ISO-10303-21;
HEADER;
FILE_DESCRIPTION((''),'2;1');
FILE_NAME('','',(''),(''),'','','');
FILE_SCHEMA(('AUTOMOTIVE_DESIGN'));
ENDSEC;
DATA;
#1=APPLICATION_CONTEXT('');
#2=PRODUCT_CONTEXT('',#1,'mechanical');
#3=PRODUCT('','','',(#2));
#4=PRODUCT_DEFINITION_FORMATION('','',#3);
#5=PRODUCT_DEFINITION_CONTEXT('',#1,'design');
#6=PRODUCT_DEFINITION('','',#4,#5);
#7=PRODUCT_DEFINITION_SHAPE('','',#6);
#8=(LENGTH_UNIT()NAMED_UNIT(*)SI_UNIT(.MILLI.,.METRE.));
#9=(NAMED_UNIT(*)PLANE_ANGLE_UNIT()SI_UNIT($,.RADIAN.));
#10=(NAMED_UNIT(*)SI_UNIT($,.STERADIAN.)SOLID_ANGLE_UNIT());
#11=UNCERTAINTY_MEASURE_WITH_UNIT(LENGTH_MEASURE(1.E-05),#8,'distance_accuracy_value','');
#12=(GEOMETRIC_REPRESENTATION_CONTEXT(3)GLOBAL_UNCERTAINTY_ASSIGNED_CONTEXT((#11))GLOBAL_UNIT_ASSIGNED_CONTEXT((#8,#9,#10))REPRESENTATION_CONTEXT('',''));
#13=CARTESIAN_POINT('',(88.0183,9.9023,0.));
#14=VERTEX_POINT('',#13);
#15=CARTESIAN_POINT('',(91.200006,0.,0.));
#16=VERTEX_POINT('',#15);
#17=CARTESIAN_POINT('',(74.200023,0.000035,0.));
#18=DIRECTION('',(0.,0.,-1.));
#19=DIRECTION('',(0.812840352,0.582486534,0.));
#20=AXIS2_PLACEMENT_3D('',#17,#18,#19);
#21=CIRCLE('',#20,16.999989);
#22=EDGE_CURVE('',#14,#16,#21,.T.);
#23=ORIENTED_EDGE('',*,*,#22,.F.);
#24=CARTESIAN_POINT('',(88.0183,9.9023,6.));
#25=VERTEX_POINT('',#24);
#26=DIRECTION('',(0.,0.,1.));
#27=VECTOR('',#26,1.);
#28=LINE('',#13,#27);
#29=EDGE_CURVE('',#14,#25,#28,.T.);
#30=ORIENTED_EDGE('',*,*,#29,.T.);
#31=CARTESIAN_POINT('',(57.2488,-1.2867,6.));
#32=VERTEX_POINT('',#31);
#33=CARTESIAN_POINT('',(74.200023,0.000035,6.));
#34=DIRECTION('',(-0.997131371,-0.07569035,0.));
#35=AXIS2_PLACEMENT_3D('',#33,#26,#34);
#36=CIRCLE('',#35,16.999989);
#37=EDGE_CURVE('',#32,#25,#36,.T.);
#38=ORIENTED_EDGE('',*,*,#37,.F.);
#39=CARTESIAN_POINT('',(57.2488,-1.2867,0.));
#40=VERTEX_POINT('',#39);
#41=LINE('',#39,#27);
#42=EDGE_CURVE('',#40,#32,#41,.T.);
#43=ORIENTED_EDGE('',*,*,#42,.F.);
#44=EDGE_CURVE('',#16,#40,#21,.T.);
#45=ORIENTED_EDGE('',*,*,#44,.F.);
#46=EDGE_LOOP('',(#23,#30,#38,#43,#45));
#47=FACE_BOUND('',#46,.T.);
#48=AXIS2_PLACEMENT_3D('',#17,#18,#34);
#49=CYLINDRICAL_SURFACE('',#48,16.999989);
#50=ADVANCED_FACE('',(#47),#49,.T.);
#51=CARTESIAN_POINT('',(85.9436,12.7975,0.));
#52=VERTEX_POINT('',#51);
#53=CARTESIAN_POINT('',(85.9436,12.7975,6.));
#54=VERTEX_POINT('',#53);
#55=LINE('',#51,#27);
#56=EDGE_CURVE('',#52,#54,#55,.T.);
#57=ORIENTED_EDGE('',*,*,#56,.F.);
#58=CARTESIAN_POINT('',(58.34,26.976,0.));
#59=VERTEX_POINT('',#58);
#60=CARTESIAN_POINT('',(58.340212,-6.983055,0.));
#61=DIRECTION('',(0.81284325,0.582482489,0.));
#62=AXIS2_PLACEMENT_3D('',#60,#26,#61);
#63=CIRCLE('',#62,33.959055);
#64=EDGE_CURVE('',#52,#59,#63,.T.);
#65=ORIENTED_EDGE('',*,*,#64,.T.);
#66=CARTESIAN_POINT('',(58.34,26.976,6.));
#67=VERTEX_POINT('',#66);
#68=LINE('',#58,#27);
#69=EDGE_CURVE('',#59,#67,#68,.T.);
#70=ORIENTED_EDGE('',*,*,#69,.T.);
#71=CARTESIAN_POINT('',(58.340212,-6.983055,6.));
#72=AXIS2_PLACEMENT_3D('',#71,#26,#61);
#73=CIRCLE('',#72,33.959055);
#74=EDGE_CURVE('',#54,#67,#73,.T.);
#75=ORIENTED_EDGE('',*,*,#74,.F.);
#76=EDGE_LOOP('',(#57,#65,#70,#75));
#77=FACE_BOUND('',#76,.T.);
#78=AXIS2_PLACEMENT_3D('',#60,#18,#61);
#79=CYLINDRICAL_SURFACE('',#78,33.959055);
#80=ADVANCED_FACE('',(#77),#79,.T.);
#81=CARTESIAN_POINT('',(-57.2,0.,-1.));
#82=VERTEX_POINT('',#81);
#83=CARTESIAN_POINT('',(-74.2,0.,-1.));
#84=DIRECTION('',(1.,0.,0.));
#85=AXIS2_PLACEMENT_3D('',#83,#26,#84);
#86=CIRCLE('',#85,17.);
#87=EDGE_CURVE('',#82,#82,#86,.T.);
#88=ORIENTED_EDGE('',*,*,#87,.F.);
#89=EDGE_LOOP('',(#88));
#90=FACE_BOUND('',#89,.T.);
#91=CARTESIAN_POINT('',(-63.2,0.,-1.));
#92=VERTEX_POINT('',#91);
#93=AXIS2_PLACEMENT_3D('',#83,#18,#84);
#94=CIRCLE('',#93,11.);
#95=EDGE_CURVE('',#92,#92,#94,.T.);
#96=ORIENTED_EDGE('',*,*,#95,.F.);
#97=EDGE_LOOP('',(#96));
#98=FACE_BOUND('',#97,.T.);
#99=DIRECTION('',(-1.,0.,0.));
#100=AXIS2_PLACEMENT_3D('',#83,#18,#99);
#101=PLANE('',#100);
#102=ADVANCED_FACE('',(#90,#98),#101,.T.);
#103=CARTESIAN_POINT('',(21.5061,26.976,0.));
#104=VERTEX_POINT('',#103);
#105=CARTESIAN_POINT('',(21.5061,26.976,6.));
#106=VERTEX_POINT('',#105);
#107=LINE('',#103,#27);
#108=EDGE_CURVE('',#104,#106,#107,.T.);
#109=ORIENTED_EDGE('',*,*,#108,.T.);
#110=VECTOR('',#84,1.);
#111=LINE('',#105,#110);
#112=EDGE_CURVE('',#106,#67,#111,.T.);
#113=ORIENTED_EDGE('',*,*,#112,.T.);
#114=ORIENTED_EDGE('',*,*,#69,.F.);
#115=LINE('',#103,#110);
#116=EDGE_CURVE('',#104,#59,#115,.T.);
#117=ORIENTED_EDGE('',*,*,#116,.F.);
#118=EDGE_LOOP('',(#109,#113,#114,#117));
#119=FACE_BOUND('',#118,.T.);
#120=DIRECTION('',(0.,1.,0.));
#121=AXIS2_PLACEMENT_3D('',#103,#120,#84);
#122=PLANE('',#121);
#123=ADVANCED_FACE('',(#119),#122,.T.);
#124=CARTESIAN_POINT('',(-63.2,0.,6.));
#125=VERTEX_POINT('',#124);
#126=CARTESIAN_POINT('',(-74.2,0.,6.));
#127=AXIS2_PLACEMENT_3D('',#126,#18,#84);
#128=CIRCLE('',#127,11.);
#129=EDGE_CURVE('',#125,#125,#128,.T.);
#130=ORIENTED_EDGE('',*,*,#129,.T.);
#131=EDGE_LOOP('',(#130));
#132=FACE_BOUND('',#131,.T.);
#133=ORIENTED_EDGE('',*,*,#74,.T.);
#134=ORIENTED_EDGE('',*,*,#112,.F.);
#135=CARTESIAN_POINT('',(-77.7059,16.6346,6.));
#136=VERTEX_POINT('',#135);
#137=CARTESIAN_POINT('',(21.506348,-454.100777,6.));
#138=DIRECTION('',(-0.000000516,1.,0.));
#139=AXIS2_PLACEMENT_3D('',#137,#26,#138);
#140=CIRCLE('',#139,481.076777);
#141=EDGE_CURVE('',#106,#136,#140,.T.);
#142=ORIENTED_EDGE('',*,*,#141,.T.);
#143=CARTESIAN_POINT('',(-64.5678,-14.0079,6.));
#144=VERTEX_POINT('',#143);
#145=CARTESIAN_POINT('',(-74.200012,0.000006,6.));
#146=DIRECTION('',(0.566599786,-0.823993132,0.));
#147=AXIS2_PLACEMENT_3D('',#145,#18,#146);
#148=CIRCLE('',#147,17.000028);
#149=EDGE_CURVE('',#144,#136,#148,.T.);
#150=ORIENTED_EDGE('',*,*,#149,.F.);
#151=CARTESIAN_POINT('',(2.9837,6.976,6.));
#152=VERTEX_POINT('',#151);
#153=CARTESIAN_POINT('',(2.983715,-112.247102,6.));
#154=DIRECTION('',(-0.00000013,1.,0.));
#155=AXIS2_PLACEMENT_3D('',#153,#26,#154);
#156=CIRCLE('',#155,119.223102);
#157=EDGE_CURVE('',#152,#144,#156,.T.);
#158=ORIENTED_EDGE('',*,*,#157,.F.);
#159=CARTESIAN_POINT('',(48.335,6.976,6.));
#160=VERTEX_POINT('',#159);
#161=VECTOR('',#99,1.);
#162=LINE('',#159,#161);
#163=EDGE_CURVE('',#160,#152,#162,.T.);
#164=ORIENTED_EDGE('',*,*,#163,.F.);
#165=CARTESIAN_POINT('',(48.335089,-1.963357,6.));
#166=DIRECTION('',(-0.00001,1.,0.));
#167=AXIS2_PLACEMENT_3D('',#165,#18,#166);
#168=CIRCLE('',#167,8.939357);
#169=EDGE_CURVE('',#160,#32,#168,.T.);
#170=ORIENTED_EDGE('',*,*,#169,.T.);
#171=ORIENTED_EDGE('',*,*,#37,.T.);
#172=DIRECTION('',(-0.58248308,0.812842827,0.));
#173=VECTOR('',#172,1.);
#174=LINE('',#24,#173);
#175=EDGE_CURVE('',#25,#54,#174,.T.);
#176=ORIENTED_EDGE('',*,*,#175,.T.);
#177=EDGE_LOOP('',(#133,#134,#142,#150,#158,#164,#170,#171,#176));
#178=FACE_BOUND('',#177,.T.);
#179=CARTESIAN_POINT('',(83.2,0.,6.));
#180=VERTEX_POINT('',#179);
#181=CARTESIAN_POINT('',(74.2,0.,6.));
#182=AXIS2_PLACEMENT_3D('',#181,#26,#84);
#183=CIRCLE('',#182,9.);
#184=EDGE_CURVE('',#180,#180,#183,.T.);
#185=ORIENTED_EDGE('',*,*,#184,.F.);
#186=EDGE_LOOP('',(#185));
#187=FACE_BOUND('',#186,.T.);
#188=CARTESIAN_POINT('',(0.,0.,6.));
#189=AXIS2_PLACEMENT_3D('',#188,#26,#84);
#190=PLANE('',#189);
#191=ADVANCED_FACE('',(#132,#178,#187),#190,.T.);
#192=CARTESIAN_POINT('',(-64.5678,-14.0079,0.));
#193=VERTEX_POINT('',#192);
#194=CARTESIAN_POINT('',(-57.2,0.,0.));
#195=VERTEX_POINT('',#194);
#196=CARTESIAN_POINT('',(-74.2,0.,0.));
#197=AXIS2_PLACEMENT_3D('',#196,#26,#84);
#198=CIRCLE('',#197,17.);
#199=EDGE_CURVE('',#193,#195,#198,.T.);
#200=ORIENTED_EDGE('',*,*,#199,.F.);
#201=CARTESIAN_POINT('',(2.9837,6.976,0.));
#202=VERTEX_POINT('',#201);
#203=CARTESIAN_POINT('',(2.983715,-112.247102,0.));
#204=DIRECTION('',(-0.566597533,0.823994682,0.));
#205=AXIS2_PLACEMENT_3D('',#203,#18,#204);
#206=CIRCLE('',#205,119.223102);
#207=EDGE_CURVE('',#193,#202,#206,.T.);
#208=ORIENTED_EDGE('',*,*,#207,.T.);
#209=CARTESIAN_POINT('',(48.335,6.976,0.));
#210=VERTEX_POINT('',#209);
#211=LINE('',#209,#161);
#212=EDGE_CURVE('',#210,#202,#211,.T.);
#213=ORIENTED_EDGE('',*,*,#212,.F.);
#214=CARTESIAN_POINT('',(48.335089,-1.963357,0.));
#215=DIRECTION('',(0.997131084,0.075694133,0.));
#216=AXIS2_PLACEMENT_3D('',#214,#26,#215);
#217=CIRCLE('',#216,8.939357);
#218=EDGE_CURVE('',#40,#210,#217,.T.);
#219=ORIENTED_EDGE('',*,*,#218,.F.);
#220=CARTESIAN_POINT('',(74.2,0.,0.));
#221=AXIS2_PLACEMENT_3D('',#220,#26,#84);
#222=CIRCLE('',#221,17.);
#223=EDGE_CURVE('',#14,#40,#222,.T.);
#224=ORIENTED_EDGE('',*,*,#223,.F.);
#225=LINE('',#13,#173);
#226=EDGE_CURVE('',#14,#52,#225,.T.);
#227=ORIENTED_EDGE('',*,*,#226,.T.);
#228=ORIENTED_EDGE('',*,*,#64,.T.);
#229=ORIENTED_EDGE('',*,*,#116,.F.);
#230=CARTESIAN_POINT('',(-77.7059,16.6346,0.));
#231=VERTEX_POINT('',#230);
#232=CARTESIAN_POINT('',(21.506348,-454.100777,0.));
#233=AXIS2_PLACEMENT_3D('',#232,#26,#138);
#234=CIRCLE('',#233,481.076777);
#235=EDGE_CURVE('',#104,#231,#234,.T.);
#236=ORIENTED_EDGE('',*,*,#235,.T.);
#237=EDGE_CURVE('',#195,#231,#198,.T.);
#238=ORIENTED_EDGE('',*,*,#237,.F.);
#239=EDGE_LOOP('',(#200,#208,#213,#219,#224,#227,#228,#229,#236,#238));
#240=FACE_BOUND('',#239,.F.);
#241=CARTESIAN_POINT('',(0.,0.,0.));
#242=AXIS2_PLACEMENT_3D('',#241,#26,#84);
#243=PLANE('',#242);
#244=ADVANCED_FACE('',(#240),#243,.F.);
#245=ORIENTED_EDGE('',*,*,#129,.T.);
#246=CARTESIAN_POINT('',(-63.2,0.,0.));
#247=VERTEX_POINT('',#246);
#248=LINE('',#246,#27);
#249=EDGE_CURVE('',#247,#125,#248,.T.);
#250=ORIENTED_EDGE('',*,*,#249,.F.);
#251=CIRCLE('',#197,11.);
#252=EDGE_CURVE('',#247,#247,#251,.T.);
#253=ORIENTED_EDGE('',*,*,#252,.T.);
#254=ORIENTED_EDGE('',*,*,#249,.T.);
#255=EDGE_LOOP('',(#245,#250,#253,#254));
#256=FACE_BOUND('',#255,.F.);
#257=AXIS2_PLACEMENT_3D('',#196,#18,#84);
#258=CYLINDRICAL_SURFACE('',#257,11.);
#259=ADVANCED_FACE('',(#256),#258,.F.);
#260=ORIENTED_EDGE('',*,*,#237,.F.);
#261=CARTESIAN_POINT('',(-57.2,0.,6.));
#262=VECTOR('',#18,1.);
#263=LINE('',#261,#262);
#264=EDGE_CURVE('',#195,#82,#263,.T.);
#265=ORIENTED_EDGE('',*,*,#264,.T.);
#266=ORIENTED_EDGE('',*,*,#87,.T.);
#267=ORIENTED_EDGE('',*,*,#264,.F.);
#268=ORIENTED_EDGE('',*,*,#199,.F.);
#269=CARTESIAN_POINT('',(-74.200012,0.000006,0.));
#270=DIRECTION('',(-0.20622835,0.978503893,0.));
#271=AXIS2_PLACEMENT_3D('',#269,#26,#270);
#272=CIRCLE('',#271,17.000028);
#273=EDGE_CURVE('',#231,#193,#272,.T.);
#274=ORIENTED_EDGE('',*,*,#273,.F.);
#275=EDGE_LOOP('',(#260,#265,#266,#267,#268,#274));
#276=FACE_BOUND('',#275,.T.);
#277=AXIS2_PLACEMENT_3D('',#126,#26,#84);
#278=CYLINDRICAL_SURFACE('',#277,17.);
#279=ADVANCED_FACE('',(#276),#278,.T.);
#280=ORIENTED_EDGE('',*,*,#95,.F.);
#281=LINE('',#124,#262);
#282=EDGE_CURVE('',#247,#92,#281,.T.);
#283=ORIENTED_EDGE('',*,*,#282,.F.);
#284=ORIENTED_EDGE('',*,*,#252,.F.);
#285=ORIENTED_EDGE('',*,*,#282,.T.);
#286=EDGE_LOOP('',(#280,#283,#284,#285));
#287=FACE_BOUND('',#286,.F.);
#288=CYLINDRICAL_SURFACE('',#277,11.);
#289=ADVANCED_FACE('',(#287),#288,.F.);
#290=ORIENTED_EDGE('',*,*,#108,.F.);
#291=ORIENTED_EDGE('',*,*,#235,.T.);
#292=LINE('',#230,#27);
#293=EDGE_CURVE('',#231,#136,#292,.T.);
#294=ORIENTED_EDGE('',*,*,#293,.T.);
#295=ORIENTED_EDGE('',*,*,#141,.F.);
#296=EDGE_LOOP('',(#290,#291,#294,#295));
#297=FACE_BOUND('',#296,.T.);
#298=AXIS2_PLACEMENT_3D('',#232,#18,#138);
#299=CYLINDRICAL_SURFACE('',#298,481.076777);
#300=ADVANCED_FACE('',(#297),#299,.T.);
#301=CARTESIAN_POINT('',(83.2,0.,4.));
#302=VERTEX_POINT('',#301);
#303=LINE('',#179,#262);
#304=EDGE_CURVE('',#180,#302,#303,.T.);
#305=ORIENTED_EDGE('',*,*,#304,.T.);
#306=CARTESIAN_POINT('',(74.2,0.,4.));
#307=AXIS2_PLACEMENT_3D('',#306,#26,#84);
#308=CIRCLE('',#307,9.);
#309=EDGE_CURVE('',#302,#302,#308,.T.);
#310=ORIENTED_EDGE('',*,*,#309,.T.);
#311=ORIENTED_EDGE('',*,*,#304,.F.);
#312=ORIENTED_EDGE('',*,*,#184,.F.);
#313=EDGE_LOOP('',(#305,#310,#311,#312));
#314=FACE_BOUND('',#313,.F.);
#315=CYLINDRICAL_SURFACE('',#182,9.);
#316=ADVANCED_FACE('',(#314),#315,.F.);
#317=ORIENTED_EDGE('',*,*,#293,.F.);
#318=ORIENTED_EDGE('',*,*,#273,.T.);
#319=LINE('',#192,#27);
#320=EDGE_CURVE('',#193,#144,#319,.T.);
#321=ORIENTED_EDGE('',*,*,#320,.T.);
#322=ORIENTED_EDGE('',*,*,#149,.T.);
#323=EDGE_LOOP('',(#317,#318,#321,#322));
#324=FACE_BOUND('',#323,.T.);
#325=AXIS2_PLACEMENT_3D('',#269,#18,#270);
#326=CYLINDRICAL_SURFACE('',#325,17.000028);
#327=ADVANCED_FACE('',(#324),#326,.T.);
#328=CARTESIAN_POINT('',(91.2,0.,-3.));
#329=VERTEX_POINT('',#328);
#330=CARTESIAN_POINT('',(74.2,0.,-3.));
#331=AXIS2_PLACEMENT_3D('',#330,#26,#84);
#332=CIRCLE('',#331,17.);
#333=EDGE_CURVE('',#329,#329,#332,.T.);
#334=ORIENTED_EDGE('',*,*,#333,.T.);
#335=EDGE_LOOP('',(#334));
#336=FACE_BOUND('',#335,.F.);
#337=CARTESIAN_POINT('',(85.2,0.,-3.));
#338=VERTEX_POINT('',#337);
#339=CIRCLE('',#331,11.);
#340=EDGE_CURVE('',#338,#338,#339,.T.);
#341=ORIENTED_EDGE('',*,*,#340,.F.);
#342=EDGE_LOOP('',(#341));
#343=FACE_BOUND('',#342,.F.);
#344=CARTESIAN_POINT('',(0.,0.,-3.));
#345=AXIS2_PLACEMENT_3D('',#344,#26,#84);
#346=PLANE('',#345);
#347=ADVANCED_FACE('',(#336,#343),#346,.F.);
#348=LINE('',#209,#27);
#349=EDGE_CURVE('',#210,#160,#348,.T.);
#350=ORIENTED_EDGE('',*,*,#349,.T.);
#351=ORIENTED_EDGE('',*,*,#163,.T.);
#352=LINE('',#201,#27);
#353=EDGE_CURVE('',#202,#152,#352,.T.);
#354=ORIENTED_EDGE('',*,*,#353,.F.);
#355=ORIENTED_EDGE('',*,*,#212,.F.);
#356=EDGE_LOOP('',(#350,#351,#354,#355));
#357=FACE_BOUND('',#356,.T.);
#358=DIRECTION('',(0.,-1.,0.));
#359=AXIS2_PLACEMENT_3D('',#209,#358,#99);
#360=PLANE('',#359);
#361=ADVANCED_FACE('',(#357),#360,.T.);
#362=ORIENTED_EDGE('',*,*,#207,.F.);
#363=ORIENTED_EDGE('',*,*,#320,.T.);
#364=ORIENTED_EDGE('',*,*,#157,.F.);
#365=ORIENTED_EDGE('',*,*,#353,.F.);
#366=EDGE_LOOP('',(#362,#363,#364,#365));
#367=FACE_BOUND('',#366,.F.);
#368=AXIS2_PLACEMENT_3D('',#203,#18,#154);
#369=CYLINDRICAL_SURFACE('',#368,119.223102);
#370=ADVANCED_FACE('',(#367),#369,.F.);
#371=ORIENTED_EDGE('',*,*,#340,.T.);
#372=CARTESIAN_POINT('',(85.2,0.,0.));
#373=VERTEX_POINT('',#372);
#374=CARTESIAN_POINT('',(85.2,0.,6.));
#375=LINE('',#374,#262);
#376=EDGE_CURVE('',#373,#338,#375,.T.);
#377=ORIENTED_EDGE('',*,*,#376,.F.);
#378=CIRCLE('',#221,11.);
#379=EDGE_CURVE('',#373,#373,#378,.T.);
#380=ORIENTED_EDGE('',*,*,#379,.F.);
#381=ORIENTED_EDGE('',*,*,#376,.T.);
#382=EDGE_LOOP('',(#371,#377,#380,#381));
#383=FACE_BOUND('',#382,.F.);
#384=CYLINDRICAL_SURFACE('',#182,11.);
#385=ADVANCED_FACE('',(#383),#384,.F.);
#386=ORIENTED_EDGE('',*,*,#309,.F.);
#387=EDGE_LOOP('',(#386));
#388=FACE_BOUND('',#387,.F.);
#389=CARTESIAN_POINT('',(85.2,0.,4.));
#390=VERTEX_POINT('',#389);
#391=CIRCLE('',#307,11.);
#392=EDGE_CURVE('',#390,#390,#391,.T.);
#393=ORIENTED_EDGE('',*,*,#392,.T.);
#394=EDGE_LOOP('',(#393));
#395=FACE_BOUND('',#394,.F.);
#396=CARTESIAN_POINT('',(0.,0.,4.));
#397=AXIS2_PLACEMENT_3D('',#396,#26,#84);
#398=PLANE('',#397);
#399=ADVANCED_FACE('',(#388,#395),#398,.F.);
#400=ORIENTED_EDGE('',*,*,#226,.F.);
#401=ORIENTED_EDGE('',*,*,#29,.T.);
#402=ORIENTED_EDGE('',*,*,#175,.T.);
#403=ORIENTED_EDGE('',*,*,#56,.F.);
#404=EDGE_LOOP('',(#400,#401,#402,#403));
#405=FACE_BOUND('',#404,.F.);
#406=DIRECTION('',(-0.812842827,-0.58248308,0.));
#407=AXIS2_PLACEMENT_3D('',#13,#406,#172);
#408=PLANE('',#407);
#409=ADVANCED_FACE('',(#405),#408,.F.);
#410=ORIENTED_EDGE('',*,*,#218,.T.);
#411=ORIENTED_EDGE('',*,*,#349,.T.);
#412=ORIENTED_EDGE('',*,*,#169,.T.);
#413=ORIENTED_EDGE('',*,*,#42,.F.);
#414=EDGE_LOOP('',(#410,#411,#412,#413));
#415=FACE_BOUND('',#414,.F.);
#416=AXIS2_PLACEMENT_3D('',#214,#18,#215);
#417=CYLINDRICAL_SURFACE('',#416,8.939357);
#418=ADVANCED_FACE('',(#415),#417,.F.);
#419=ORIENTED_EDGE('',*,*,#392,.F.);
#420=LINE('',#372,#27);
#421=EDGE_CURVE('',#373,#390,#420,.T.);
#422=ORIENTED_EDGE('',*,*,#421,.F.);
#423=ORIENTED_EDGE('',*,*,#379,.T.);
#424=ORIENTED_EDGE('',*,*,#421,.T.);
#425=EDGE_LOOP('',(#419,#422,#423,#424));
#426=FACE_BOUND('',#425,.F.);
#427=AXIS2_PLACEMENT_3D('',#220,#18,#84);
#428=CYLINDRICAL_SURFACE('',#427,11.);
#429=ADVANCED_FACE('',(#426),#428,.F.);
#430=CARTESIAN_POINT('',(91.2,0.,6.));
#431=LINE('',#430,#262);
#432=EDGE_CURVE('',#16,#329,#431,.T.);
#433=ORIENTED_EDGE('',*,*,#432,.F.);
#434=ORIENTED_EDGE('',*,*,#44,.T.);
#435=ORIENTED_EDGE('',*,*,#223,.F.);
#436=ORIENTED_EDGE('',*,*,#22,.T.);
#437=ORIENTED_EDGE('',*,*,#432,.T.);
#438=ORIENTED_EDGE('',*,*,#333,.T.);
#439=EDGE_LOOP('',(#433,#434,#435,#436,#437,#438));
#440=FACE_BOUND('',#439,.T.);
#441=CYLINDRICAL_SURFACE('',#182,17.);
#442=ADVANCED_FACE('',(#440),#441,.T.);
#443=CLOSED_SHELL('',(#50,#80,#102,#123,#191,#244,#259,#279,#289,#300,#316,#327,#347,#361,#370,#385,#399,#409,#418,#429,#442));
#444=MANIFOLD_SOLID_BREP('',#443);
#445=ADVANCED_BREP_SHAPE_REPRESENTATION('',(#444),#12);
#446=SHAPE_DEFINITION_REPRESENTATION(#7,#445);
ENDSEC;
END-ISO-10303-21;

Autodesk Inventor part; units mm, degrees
ref_plane "YZ Plane" through (0, 0, 0) normal (1, 0, 0) x (0, 1, 0)
ref_plane "XZ Plane" through (0, 0, 0) normal (0, 1, 0) x (-1, 0, 0)
ref_plane "XY Plane" through (0, 0, 0) normal (0, 0, 1) x (1, 0, 0)
sketch "Sketch1" plane through (0, 0, 0) normal (0, 0, 1) x (1, 0, 0)
  circle A0 centre (-74.2, 0) radius 11
  circle A1 centre (74.2, 0) radius 11
  arc A2 (-77.7059, 16.6346) -> (-64.5678, -14.0079) centre (-74.2, 0) ccw
  arc A3 (57.2488, -1.2867) -> (88.0183, 9.9023) centre (74.2, 0) ccw
  line L0 (-103.108, 0) -> (101.0811, 0)
  line L1 (48.335, 6.976) -> (2.9837, 6.976)
  arc A4 (2.9837, 6.976) -> (-64.5678, -14.0079) centre (2.9837, -112.247) ccw
  arc A5 (57.2488, -1.2867) -> (48.335, 6.976) centre (48.335, -1.9634) ccw
  line L2 (88.0183, 9.9023) -> (85.9436, 12.7975)
  line L3 (21.5061, 26.976) -> (58.34, 26.976)
  arc A6 (85.9436, 12.7975) -> (58.34, 26.976) centre (58.34, -6.9833) ccw
  arc A7 (21.5061, 26.976) -> (-77.7059, 16.6346) centre (21.5061, -454.096) ccw
  point P0 (0, 0)
  dimension "d0" = 22
  dimension "d1" = 22
  dimension "d2" = 148.4
  dimension "d3" = 74.2
  dimension "d4" = 6
  dimension "d5" = 6
  dimension "d12" = 20
extrude "Extrusion1" add sketch "Sketch1" along normal blind 6 contours L0 A4 A2 A0 | A0 L0 A2 A7 L3 A6 L2 A3 A1 A5 L1 A4 | L0 A1 A3 A5
sketch "Sketch2" plane through (0, 0, 6) normal (0, 0, 1) x (1, 0, 0)
  circle A0 centre (-74.2, 0) radius 11 projected
  circle A1 centre (-74.2, 0) radius 17
  circle A2 centre (74.2, 0) radius 11 projected
  circle A3 centre (74.2, 0) radius 17
  point P0 (0, 0)
extrude "Extrusion2" add sketch "Sketch2" against normal blind 9
fillet "Fillet1" [suppressed]
sketch "Sketch3" plane through (0, 0, 6) normal (0, 0, 1) x (1, 0, 0)
  circle A0 centre (74.2, 0) radius 11 projected
  circle A1 centre (74.2, 0) radius 9
  point P0 (0, 0)
  dimension "d32" = 18
extrude "Extrusion3" add sketch "Sketch3" against normal blind 2
sketch "Sketch5" plane through (-74.2, 0, -3) normal (0, 0, -1) x (-1, 0, 0)
  circle A0 centre (0, 0) radius 11 projected
  circle A1 centre (0, 0) radius 17 projected
  point P0 (-74.2, 0)
extrude "Extrusion5" cut sketch "Sketch5" against normal blind 2
equation "\"d3\" = 0.5 * d2"
properties part number "Arm 13X - parallel linkage"
